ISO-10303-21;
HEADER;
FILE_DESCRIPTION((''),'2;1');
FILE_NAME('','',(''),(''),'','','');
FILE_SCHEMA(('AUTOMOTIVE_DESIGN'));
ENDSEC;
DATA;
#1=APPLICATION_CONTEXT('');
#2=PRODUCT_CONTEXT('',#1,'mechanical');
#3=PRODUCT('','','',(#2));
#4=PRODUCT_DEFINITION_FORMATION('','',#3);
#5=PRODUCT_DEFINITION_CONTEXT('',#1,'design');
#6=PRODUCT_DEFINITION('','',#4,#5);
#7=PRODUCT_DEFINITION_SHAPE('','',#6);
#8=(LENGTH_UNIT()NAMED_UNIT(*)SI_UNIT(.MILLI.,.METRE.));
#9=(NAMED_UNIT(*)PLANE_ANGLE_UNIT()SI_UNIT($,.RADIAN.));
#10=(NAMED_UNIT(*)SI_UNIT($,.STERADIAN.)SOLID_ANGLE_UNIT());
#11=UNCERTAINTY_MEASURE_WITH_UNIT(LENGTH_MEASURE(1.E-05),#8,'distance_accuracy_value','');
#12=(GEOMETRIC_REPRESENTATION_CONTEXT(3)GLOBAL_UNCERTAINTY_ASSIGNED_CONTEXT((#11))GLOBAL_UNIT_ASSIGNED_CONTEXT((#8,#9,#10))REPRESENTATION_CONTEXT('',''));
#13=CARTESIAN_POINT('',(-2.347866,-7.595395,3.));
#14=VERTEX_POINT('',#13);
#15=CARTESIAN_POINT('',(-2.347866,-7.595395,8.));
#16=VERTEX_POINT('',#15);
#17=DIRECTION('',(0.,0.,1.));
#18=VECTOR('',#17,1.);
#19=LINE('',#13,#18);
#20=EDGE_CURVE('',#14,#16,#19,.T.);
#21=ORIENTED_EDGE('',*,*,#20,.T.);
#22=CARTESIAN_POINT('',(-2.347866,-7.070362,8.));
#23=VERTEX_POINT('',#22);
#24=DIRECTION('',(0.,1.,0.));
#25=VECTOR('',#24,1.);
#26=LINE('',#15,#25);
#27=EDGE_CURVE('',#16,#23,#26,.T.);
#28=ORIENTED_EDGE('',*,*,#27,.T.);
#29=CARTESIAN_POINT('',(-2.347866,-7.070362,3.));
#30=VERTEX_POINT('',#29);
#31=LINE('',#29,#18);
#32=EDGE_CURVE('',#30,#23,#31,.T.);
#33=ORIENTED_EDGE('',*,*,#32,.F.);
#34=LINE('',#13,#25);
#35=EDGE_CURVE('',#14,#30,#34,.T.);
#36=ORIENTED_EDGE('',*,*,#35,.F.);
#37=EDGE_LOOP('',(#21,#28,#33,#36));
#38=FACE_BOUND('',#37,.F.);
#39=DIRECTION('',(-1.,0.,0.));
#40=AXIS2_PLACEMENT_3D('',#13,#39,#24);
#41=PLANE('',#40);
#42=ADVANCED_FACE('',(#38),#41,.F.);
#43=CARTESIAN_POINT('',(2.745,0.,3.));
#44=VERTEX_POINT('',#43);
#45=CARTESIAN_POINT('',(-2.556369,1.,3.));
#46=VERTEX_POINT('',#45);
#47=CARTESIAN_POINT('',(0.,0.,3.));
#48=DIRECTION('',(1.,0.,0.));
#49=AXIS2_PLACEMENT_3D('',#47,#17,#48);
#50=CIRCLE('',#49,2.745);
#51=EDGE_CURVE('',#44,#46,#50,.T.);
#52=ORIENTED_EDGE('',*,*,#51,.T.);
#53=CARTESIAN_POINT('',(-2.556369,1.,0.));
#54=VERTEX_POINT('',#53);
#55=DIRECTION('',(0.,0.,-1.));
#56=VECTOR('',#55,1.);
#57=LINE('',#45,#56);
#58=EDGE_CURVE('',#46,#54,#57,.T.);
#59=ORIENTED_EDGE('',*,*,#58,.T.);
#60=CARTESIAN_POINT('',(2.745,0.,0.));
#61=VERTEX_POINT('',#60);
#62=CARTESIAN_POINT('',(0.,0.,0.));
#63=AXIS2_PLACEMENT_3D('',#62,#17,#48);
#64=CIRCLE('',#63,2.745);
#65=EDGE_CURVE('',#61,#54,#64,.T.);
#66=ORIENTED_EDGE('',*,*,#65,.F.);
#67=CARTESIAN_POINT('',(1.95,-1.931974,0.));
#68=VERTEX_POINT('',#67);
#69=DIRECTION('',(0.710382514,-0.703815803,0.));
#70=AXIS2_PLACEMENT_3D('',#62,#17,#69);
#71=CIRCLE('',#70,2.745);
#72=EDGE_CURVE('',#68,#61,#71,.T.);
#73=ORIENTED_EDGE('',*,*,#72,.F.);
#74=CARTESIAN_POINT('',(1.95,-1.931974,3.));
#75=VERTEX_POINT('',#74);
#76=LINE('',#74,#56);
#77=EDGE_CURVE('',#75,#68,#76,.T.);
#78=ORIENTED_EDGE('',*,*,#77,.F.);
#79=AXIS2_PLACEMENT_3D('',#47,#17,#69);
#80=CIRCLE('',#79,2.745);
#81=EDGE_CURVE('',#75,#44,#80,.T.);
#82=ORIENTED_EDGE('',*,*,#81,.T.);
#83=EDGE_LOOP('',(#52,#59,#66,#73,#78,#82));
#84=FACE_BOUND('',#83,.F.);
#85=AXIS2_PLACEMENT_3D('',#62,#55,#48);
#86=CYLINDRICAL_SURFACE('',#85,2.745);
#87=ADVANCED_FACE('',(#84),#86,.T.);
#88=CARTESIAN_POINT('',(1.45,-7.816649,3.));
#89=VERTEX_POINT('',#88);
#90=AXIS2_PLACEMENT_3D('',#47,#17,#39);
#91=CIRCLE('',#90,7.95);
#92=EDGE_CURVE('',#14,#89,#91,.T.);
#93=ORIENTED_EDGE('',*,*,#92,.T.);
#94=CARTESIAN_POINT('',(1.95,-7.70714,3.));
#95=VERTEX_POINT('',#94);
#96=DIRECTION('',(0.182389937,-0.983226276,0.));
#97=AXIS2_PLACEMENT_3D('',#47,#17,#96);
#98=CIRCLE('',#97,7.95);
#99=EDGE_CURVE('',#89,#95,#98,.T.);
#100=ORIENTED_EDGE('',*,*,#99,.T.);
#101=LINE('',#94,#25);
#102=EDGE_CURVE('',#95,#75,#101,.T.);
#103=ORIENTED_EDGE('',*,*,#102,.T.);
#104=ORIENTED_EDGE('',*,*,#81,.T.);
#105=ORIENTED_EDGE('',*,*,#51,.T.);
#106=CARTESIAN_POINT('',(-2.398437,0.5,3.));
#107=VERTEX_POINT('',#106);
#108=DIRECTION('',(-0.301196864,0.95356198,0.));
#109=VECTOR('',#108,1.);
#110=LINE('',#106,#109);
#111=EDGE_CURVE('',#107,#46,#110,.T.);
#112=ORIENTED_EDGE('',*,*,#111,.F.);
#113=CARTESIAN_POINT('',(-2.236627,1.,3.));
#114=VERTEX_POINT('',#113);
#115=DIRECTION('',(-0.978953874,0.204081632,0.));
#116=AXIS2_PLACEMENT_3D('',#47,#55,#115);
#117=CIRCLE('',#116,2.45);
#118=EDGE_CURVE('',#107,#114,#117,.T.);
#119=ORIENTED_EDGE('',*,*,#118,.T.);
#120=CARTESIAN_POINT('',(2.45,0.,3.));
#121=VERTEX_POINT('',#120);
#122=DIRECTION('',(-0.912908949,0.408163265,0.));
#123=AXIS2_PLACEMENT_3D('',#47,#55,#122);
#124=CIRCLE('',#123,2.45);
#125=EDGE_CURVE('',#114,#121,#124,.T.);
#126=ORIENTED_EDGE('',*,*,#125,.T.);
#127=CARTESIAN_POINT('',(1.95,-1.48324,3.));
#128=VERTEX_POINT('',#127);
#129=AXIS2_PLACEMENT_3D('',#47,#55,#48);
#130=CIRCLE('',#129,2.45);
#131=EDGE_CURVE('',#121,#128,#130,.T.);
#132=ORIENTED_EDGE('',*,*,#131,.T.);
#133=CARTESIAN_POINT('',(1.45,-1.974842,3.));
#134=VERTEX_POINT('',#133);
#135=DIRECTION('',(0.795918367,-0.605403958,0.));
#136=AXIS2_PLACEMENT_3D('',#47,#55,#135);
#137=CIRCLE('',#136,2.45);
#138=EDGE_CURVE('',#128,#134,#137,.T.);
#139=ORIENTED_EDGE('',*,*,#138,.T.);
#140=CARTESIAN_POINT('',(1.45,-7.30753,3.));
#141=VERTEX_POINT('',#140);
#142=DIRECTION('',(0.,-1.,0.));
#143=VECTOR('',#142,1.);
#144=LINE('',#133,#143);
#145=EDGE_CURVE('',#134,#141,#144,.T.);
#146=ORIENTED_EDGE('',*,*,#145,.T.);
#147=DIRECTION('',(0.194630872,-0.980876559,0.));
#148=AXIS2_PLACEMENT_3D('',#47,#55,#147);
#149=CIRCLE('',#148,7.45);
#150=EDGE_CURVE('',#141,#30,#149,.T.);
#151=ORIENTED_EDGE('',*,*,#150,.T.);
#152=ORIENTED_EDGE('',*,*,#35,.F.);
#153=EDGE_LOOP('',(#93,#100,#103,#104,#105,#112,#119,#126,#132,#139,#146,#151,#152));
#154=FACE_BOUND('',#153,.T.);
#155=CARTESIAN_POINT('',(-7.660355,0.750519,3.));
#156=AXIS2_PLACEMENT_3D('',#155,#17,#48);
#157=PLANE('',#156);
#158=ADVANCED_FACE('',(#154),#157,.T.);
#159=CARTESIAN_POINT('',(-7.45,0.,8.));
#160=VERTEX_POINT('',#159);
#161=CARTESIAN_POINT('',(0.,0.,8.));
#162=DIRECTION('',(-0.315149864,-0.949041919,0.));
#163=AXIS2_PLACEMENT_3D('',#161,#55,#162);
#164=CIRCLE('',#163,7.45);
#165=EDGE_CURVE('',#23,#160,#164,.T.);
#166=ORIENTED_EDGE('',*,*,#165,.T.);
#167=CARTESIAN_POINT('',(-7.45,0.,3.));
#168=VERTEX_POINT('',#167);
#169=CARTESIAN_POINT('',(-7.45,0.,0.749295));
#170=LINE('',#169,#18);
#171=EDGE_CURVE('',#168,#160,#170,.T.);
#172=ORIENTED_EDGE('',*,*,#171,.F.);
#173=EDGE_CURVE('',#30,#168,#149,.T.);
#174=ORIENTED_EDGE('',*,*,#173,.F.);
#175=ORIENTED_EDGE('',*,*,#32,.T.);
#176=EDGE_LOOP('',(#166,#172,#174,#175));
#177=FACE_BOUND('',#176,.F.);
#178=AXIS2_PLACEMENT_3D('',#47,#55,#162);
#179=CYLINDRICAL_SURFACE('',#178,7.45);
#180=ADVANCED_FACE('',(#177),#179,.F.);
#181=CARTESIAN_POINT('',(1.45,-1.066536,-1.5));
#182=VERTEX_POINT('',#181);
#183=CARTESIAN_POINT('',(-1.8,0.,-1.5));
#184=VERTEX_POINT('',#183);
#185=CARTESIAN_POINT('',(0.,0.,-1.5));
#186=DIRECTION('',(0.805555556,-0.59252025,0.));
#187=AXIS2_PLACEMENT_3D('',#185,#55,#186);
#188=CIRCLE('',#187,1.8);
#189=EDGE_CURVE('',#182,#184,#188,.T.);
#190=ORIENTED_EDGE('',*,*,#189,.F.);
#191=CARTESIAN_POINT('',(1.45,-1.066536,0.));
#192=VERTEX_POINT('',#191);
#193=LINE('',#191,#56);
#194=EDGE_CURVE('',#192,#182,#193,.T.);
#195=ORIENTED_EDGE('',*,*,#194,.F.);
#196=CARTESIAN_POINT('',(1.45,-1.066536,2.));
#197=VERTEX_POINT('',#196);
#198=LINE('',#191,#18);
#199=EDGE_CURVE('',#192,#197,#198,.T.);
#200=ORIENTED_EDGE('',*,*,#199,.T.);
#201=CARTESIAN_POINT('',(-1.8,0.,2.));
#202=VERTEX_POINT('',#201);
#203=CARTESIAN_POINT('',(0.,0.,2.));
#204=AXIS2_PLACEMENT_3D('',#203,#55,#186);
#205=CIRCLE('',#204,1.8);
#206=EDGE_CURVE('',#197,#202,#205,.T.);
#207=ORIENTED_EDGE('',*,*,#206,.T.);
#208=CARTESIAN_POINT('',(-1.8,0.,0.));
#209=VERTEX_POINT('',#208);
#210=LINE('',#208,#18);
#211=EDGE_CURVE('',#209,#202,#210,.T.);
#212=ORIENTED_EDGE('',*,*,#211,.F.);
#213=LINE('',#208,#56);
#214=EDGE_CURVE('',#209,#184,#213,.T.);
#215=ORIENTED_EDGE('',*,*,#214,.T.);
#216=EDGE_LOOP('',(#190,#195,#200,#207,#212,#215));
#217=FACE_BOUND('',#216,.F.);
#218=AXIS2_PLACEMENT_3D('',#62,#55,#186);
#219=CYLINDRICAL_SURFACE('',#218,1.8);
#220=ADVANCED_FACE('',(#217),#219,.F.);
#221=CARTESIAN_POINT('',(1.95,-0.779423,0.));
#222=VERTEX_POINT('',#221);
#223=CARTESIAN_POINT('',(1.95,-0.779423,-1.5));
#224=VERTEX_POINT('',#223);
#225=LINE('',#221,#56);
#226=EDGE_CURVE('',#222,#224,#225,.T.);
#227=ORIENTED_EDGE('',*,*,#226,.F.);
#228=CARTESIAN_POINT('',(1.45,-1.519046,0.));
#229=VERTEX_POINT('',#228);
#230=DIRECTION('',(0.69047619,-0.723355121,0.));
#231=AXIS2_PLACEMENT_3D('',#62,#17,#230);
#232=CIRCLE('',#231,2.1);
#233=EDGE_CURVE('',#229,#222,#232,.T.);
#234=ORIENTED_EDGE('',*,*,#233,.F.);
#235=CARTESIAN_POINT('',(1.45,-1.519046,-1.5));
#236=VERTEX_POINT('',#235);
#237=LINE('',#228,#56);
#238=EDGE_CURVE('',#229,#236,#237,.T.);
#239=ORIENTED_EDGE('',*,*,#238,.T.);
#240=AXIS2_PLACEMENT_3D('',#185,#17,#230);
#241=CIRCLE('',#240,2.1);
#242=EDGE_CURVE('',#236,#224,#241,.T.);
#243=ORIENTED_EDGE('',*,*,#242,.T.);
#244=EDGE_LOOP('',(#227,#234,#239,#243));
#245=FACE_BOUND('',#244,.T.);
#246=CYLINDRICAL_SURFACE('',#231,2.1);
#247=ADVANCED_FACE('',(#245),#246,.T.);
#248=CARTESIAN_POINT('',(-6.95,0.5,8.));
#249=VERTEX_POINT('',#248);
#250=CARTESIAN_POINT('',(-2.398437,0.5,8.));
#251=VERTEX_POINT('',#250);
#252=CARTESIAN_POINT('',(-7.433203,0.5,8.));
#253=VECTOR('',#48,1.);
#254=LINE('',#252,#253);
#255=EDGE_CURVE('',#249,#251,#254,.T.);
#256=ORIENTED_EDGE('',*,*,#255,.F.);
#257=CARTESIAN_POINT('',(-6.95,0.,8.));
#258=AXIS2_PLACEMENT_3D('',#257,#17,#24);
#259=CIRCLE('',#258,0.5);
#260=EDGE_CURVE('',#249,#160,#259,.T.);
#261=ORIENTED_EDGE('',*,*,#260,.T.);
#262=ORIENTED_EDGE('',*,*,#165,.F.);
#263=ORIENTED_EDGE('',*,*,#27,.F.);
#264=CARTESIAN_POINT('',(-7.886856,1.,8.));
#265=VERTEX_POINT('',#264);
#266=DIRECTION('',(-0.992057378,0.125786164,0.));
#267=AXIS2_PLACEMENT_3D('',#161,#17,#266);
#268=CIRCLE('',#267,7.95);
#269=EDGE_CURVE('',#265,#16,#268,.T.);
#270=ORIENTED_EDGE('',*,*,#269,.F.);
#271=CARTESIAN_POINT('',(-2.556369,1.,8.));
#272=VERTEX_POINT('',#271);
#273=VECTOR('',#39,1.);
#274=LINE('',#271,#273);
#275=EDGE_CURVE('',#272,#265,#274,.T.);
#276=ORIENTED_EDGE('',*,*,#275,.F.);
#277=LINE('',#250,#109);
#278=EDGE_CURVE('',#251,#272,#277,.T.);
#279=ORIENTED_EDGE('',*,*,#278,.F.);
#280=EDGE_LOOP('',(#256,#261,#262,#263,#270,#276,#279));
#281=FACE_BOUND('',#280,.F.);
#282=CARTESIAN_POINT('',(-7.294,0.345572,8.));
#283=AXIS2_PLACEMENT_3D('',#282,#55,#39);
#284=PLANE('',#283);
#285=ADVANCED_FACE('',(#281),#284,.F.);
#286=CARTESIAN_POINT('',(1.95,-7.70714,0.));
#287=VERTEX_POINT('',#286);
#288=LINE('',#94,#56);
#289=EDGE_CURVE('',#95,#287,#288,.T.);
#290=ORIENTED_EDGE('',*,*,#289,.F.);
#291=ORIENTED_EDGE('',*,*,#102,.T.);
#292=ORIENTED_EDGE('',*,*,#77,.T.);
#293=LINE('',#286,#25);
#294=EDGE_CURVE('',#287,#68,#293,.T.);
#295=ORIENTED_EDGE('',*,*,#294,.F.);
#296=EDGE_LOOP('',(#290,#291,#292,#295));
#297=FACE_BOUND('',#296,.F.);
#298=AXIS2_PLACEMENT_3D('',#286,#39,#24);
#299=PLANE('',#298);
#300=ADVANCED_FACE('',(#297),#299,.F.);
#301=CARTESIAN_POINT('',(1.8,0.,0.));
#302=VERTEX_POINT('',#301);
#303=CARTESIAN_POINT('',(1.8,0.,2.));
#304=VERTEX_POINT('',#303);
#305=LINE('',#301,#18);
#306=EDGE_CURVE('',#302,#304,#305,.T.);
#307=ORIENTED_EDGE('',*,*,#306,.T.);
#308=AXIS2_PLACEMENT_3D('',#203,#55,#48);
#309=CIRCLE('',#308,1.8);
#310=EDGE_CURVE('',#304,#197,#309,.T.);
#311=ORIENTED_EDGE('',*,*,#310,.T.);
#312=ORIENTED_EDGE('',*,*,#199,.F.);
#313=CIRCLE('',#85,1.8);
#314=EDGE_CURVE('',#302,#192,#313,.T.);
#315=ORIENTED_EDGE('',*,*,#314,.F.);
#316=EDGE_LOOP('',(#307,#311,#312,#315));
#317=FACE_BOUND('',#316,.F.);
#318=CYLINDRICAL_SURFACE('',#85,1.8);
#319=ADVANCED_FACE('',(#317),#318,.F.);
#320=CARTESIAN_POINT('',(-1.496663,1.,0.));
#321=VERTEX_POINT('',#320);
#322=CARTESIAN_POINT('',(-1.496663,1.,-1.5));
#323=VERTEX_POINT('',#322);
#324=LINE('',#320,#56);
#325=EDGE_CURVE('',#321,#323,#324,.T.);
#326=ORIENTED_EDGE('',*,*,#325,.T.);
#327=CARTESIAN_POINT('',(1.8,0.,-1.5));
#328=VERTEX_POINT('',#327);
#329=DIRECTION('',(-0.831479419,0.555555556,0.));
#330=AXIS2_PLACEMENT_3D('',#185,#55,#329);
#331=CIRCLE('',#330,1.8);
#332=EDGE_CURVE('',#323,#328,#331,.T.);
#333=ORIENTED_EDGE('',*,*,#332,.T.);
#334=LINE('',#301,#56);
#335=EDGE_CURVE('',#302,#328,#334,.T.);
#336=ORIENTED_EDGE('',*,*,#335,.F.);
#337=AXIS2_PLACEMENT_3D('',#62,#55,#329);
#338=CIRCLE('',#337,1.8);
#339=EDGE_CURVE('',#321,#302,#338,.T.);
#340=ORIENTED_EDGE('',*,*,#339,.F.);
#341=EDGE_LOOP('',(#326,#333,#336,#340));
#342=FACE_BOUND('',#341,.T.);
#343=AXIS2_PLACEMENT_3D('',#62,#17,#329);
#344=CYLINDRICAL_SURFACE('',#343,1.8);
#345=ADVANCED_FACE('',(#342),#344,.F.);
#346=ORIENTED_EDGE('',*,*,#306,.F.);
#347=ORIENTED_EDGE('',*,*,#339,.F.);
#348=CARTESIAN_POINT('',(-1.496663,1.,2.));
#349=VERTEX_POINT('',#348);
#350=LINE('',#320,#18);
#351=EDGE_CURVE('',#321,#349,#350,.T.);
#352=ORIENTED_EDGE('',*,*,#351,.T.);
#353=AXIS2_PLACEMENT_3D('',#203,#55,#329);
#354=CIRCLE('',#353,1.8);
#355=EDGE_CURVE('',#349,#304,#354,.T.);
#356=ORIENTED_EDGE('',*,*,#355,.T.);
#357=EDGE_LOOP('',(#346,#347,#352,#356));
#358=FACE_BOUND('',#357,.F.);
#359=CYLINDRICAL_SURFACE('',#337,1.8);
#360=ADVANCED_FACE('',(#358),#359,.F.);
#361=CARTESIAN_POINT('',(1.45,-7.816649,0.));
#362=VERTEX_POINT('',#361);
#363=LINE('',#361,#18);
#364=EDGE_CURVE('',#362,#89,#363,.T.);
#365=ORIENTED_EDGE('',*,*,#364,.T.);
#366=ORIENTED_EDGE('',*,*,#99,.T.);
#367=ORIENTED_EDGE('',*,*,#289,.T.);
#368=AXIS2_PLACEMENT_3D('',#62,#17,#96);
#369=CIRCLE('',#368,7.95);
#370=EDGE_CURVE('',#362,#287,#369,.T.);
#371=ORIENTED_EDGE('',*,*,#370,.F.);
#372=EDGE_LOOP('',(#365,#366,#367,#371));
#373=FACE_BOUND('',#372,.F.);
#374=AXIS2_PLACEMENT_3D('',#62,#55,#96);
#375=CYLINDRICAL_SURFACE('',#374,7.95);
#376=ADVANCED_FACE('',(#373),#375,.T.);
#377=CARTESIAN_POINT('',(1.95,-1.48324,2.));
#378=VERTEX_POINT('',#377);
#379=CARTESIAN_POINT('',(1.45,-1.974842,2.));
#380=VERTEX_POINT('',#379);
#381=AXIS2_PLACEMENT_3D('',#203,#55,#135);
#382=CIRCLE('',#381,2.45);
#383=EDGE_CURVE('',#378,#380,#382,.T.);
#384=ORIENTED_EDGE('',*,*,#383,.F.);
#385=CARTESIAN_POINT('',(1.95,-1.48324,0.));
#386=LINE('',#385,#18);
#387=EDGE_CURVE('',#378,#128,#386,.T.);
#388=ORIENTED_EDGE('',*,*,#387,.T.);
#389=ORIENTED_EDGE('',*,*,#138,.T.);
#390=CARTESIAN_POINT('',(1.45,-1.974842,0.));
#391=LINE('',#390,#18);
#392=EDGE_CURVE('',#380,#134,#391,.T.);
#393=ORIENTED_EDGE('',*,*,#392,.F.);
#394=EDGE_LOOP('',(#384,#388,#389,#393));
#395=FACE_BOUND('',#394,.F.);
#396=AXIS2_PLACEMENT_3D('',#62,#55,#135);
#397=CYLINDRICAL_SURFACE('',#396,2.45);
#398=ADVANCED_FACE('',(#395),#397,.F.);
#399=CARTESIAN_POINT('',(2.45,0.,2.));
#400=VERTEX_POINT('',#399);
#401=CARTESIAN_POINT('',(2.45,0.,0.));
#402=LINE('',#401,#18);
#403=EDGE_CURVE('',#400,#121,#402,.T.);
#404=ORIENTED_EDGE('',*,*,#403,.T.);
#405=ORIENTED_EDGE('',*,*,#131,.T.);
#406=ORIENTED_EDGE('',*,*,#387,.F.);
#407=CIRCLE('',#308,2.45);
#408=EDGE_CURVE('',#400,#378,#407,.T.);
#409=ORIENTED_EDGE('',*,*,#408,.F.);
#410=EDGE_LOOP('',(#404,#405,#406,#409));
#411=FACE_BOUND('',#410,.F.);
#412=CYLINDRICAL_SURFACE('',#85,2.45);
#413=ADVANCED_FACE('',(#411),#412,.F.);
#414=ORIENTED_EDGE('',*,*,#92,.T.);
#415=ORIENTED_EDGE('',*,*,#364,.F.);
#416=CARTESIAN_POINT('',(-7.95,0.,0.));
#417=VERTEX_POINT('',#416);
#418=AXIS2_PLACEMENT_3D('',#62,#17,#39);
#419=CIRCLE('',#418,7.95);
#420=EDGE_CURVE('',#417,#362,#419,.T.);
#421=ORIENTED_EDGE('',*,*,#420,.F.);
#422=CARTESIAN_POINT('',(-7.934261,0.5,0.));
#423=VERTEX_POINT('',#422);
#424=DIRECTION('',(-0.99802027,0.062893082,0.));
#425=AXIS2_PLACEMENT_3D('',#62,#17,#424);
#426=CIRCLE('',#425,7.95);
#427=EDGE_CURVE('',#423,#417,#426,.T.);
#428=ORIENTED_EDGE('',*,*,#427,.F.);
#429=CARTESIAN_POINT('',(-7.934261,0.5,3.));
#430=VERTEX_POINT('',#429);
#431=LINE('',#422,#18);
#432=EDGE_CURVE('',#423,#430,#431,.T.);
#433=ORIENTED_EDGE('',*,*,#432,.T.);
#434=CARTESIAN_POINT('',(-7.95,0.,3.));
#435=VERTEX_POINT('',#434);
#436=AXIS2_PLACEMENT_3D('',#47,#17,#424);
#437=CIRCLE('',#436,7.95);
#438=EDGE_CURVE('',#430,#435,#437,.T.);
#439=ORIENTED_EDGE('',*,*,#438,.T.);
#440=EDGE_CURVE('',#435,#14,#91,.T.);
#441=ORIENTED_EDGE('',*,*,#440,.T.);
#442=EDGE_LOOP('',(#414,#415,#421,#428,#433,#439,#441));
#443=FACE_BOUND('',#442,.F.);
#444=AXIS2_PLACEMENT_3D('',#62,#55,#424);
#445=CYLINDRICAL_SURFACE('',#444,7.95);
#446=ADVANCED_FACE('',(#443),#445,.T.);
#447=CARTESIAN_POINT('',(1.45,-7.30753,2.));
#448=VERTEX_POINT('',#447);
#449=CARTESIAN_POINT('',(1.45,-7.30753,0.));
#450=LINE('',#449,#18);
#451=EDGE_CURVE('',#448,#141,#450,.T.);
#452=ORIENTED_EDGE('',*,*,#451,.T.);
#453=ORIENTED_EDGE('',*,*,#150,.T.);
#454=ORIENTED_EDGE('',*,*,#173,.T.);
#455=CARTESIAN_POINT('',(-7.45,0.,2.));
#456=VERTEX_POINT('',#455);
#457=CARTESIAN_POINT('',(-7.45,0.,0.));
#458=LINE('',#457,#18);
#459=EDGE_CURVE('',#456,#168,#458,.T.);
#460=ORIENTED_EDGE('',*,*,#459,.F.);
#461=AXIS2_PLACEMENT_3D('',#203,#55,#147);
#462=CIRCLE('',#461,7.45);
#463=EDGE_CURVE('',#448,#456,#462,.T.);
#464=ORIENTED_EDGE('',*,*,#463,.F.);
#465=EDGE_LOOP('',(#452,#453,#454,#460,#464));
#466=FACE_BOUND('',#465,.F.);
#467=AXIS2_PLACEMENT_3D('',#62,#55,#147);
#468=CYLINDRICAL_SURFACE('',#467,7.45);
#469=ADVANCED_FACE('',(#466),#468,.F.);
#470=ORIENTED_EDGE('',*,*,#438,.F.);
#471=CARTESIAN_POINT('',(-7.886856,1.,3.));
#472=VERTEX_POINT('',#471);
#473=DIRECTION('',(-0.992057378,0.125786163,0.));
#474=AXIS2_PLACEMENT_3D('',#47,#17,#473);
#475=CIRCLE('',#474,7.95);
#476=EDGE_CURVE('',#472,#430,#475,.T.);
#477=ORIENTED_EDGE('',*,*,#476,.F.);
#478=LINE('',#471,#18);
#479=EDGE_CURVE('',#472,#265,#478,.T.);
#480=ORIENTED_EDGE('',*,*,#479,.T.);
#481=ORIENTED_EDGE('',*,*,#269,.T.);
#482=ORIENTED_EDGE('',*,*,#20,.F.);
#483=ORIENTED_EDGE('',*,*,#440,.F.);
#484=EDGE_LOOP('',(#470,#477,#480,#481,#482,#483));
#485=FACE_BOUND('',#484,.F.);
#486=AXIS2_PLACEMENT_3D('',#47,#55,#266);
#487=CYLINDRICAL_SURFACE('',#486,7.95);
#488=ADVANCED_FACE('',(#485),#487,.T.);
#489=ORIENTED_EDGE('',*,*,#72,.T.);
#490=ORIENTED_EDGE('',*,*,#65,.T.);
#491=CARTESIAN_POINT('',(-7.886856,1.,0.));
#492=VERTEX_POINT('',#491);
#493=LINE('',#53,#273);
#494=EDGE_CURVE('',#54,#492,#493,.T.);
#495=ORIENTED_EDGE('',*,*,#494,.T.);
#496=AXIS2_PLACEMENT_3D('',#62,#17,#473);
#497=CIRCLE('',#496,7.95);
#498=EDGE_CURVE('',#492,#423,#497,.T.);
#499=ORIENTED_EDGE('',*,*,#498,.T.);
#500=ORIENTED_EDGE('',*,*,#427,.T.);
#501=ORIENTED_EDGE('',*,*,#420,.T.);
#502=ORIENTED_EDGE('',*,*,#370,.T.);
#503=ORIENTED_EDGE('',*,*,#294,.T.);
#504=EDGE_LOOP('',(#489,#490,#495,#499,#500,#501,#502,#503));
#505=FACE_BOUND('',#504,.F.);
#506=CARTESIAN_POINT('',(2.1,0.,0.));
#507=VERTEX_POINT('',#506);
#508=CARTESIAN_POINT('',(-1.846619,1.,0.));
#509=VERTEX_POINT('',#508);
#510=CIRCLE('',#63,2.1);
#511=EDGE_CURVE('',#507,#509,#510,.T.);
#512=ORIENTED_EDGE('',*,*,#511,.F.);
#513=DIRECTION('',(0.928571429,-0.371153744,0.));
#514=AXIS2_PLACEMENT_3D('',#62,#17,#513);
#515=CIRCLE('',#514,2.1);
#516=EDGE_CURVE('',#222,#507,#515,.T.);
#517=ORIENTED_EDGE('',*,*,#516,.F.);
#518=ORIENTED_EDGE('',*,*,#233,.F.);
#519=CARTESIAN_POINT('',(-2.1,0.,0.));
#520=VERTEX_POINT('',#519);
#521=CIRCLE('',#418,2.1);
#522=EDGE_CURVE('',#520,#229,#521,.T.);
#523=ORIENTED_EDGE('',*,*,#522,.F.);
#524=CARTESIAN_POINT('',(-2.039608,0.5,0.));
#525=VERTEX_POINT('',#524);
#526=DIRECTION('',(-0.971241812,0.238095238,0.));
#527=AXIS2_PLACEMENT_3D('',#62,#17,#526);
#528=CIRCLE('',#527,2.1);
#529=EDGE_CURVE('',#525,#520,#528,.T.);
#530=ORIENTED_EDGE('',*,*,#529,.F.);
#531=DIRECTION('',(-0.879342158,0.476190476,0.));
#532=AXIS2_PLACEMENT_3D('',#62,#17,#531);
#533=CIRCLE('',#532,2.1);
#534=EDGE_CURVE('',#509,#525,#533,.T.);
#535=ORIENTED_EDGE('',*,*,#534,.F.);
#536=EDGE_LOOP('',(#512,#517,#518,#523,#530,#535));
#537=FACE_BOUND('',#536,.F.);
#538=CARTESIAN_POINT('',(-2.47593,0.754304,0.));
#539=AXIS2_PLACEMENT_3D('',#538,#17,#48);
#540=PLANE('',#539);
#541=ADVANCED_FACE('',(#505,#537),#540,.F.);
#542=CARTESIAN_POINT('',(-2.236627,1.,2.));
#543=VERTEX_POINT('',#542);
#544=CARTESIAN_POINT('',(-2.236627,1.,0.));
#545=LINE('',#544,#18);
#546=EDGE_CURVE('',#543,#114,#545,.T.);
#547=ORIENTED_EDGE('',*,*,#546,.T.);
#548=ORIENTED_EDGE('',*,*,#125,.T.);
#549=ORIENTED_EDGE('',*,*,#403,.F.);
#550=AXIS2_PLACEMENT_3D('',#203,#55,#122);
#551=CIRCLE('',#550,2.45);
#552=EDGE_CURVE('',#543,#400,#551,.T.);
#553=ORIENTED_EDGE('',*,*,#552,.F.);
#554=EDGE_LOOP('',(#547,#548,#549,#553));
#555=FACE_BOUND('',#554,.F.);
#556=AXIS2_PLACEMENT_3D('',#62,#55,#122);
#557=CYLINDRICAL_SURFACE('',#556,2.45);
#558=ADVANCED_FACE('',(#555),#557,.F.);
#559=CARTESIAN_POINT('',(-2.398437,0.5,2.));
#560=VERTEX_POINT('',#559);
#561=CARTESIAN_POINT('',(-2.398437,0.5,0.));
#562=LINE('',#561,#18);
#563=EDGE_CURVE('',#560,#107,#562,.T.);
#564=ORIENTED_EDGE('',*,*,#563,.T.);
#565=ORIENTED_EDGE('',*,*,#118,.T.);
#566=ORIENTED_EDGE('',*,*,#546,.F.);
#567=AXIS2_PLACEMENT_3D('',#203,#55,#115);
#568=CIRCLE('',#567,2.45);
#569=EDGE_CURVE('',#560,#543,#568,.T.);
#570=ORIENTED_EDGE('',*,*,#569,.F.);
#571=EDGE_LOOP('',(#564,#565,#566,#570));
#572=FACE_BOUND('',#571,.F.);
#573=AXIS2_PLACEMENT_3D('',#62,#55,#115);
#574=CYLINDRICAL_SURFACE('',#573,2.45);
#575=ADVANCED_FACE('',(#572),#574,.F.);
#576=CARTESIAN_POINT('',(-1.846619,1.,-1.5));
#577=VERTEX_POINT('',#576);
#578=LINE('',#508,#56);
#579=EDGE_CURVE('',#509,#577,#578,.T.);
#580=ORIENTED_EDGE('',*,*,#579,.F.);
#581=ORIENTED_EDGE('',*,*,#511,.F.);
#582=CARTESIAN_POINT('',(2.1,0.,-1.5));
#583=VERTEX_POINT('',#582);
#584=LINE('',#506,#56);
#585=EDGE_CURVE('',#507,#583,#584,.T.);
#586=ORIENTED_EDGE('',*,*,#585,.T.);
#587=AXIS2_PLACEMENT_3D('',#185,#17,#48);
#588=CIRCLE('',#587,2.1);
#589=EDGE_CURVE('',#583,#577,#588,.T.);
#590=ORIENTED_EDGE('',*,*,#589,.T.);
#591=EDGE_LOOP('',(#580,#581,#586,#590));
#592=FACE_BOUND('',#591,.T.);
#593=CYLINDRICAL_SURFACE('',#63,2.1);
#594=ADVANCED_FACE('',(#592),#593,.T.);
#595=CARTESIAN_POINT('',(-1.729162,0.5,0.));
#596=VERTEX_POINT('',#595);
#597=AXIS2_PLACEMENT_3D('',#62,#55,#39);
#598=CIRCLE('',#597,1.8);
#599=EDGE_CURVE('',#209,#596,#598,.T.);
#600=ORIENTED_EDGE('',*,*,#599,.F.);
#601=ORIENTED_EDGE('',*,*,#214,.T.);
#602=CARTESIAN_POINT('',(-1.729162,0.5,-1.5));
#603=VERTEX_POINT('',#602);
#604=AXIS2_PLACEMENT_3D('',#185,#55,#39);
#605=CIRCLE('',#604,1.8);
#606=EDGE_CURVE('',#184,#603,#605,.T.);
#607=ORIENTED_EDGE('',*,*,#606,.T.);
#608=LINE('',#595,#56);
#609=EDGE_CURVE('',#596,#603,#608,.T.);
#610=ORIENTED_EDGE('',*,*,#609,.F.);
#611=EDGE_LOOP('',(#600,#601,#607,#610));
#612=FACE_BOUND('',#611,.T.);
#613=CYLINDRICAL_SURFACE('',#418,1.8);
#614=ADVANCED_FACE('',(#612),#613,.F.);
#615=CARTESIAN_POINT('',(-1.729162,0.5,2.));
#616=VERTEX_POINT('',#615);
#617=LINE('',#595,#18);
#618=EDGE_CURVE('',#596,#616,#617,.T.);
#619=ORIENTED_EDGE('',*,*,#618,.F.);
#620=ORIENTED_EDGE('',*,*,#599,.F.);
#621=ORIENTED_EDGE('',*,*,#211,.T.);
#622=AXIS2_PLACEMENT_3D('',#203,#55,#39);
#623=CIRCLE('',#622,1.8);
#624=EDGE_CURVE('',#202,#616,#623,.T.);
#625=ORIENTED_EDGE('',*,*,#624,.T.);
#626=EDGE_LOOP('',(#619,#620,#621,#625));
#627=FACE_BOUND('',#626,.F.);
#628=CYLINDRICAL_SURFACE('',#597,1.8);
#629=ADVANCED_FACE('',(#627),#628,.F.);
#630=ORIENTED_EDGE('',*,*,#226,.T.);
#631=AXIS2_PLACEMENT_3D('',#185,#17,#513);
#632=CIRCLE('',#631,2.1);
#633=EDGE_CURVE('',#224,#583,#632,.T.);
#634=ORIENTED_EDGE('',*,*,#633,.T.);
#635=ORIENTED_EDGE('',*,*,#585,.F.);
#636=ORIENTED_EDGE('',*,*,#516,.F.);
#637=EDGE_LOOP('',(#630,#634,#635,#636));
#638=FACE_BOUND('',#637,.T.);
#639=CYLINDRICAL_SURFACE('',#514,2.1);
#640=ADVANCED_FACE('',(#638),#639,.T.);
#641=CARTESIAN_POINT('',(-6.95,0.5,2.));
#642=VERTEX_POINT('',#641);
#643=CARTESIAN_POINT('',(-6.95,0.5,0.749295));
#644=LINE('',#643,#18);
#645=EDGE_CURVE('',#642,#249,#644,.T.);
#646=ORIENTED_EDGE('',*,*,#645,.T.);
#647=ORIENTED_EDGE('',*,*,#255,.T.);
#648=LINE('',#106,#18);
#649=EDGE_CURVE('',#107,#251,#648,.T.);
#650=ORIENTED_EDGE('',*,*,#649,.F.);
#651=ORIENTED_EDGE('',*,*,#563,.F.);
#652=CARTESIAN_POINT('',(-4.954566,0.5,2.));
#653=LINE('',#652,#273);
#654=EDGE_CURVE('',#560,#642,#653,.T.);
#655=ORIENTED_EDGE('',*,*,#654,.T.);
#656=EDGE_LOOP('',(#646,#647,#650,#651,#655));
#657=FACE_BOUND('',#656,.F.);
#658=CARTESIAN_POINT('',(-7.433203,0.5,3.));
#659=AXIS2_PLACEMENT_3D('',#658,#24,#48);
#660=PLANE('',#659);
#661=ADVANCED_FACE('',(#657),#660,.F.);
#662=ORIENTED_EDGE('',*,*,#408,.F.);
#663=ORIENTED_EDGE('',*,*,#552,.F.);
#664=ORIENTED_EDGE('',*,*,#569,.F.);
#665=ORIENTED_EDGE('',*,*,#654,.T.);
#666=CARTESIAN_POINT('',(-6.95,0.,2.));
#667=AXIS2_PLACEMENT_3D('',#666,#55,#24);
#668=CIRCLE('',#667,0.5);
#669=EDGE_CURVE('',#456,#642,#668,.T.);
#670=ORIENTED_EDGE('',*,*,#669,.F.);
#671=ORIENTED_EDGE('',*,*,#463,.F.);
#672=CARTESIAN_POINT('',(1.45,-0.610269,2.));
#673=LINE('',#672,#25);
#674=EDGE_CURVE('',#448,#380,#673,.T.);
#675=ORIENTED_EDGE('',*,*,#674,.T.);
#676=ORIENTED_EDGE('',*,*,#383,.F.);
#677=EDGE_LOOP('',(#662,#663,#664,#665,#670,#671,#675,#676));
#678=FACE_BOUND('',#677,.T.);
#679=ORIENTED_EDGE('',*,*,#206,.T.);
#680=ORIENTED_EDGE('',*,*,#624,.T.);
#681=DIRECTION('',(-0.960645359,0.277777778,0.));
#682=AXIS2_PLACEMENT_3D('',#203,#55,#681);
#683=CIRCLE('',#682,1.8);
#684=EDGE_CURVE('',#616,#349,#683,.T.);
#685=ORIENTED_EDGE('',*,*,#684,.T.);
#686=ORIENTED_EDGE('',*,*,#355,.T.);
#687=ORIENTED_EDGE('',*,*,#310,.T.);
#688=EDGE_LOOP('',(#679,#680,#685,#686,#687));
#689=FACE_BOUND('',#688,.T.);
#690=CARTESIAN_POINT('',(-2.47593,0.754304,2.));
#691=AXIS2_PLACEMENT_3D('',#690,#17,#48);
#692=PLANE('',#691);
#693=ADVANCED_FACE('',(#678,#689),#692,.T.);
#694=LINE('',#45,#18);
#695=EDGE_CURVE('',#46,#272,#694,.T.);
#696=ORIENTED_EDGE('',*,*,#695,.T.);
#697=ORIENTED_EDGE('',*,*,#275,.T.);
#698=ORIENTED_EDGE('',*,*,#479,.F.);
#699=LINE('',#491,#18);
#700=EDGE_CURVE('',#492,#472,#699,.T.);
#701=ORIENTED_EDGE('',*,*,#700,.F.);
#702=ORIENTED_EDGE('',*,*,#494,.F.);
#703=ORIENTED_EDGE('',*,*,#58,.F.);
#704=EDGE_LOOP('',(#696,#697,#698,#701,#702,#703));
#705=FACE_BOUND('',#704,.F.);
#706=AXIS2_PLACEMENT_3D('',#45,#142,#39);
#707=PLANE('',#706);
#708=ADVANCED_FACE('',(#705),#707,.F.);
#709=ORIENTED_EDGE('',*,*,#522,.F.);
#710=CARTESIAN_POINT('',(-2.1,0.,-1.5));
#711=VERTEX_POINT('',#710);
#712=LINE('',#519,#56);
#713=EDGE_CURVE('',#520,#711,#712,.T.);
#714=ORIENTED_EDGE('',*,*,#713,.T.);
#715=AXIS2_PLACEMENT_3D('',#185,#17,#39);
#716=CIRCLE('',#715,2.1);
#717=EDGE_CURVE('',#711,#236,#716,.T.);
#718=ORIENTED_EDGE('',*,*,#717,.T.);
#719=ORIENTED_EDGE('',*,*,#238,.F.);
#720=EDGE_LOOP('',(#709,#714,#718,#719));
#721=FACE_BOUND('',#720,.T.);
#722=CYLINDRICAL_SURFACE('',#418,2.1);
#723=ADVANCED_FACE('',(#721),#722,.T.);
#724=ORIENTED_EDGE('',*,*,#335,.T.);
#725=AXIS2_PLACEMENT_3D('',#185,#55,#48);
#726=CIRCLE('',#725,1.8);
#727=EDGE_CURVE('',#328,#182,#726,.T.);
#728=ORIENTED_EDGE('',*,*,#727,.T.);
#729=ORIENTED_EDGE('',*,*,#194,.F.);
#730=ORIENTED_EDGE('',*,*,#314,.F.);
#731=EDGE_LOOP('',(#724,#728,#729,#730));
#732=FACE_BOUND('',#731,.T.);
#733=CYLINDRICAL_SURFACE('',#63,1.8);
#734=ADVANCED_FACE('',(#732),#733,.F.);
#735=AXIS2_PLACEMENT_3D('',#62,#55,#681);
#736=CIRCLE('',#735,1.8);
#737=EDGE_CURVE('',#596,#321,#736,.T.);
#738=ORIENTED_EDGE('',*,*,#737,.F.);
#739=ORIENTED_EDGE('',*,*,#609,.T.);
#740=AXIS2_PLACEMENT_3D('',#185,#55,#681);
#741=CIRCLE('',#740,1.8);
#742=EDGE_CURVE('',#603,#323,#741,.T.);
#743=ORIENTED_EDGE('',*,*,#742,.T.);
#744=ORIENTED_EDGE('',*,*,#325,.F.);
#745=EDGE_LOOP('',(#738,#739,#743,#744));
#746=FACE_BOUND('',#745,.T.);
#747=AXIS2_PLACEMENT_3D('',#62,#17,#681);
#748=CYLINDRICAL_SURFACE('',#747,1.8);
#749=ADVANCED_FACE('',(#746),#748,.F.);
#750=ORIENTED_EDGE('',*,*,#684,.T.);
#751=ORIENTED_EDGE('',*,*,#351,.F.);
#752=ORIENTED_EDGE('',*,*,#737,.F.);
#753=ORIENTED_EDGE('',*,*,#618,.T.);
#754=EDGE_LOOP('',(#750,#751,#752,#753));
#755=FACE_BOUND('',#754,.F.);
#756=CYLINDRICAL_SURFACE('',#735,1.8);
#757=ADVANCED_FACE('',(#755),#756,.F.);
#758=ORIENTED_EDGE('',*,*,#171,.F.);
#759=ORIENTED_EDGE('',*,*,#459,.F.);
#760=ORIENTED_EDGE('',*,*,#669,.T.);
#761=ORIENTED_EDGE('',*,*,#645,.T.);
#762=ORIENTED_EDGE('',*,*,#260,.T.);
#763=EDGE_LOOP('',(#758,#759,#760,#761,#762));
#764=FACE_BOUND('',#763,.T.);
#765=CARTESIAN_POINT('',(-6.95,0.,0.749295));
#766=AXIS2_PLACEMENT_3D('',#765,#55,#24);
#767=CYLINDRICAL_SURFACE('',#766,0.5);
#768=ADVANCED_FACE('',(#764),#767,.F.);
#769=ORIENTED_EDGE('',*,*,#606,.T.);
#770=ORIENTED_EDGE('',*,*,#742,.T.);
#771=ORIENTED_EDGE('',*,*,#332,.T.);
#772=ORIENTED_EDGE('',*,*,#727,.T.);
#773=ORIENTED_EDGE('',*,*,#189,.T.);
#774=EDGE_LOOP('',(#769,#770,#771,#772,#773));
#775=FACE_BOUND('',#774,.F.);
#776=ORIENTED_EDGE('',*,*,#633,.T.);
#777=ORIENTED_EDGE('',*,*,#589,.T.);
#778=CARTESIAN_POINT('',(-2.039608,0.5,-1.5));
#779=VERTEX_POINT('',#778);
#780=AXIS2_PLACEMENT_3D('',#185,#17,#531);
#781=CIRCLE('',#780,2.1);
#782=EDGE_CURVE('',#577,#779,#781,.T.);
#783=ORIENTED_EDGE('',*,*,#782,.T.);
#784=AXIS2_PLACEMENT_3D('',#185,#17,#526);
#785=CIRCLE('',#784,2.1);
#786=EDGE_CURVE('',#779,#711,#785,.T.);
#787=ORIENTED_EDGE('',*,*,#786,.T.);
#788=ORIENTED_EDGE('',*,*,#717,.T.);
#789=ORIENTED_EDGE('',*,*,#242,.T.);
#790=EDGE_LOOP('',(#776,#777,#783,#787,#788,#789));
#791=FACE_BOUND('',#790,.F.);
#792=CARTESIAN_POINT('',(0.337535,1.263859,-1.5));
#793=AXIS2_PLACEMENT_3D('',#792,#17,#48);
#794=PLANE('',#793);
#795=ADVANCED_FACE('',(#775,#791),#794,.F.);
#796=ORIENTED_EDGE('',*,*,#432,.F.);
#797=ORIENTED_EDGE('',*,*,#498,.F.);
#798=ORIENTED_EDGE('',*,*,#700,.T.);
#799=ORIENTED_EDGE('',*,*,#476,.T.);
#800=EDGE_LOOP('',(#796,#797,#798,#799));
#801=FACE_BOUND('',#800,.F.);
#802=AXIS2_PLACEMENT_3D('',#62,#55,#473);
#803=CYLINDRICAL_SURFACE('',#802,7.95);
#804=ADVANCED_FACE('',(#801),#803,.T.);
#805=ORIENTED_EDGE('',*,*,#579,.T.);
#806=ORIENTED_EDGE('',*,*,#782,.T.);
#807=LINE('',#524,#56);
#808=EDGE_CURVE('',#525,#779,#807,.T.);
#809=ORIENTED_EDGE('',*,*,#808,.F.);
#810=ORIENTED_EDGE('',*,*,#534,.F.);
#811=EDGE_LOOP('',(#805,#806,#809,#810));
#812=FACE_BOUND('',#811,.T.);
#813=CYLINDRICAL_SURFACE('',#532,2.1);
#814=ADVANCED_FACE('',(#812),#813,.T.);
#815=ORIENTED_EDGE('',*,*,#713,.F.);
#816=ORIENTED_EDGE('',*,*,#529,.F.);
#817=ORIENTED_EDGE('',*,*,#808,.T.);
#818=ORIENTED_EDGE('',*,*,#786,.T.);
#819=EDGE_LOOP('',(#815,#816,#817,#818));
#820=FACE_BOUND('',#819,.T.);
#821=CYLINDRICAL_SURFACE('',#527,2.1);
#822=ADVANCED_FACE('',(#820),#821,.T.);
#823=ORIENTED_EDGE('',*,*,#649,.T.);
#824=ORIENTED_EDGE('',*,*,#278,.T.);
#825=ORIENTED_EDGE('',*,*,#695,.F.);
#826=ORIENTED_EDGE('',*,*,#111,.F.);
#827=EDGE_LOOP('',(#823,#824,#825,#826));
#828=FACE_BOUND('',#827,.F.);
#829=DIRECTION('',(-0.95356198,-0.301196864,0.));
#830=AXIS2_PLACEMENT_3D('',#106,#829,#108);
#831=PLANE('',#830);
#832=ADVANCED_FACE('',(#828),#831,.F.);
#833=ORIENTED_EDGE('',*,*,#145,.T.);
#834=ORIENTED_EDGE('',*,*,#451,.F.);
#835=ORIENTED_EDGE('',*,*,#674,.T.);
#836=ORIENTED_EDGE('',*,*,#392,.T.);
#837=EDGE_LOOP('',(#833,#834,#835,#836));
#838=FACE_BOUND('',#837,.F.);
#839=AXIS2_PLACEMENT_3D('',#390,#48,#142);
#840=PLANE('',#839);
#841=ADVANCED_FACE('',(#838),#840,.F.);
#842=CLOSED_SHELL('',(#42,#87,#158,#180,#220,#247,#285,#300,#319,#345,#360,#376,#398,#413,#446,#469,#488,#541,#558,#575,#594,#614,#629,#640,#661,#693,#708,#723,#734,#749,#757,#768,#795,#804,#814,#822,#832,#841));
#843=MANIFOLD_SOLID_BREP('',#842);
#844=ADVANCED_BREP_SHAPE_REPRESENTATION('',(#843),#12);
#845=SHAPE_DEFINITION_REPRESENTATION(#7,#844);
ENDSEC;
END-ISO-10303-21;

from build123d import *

# Parameters (mm, degrees)
F1_DEPTH    = 2
F2_DEPTH    = 3
F3_DEPTH    = 1.5
F5_DEPTH    = 5
F6_T1_DEPTH = 7.2507051877


# Not quite as in the source:
# - a fillet or chamfer that OpenCascade refuses, or shapes differently, is made with other operations: its cross-section is extruded or revolved along the edge and cut away or added
# - a feature names something its author has since deleted; it is built from what else it names


with BuildPart() as f1:
    # F0 (on Top) → F1 (new body)
    with BuildSketch(Plane.XY):
        with BuildLine():
            ThreePointArc((-2.398436991, 0.5), (-2.3309771289, 0.7543511281), (-2.2366269246, 1))
            Line((-2.2366269246, 1), (-2.556369496, 1))
            ThreePointArc((-2.556369496, 1), (-2.6395896521, 0.7533866658), (-2.6990785465, 0.5))
            Line((-2.6990785465, 0.5), (-2.398436991, 0.5))
        make_face()
        with BuildLine():
            ThreePointArc((-2.2366269246, 1), (0.5112553348, 2.3960630173), (2.45, 0))
            ThreePointArc((2.45, 0), (2.3216373532, -0.7826237921), (1.95, -1.4832396974))
            Line((1.95, -1.4832396974), (1.95, -1.9319743787))
            ThreePointArc((1.95, -1.9319743787), (2.5384813373, -1.0445752725), (2.745, 0))
            ThreePointArc((2.745, 0), (0.5088176164, 2.6974301906), (-2.556369496, 1))
            Line((-2.556369496, 1), (-2.2366269246, 1))
        make_face()
        with BuildLine():
            ThreePointArc((-2.6990785465, 0.5), (-2.6395896521, 0.7533866658), (-2.556369496, 1))
            Line((-2.556369496, 1), (-7.3825808495, 1))
            ThreePointArc((-7.3825808495, 1), (-7.4121089685, 0.7504269711), (-7.43320254, 0.5))
            Line((-7.43320254, 0.5), (-2.6990785465, 0.5))
        make_face()
        with BuildLine():
            ThreePointArc((-2.745, 0), (-2.7334955286, 0.2510521758), (-2.6990785465, 0.5))
            Line((-2.6990785465, 0.5), (-7.43320254, 0.5))
            ThreePointArc((-7.43320254, 0.5), (-7.4457994508, 0.2501410375), (-7.45, 0))
            Line((-7.45, 0), (-2.745, 0))
        make_face()
        with BuildLine():
            Line((1.45, -7.3075303626), (1.45, -2.3307777672))
            ThreePointArc((1.45, -2.3307777672), (-1.3331869711, -2.399507762), (-2.745, 0))
            Line((-2.745, 0), (-7.45, 0))
            ThreePointArc((-7.45, 0), (-4.7275786614, -5.7578207683), (1.45, -7.3075303626))
        make_face()
        with BuildLine():
            Line((1.45, -2.3307777672), (1.45, -1.9748417658))
            ThreePointArc((1.45, -1.9748417658), (-1.1067971811, -2.1857492994), (-2.45, 0))
            Line((-2.45, 0), (-2.745, 0))
            ThreePointArc((-2.745, 0), (-1.3331869711, -2.399507762), (1.45, -2.3307777672))
        make_face()
        with BuildLine():
            Line((1.95, -1.9319743787), (1.95, -1.4832396974))
            ThreePointArc((1.95, -1.4832396974), (1.7176781271, -1.7470208504), (1.45, -1.9748417658))
            Line((1.45, -1.9748417658), (1.45, -2.3307777672))
            ThreePointArc((1.45, -2.3307777672), (1.7116544732, -2.1459878761), (1.95, -1.9319743787))
        make_face()
        with BuildLine():
            ThreePointArc((-2.745, 0), (-2.7334955286, 0.2510521758), (-2.6990785465, 0.5))
            Line((-2.6990785465, 0.5), (-7.43320254, 0.5))
            ThreePointArc((-7.43320254, 0.5), (-7.4457994508, 0.2501410375), (-7.45, 0))
            Line((-7.45, 0), (-2.745, 0))
        make_face()
        with BuildLine():
            Line((1.45, -7.3075303626), (1.45, -2.3307777672))
            ThreePointArc((1.45, -2.3307777672), (-1.3331869711, -2.399507762), (-2.745, 0))
            Line((-2.745, 0), (-7.45, 0))
            ThreePointArc((-7.45, 0), (-4.7275786614, -5.7578207683), (1.45, -7.3075303626))
        make_face()
        with BuildLine():
            Line((1.95, -7.1902712049), (1.95, -1.9319743787))
            ThreePointArc((1.95, -1.9319743787), (1.7116544732, -2.1459878761), (1.45, -2.3307777672))
            Line((1.45, -2.3307777672), (1.45, -7.3075303626))
            ThreePointArc((1.45, -7.3075303626), (1.7010107076, -7.253210501), (1.95, -7.1902712049))
        make_face()
        with BuildLine():
            ThreePointArc((-7.43320254, 0.5), (-7.4121089685, 0.7504269711), (-7.3825808495, 1))
            Line((-7.3825808495, 1), (-7.8868561544, 1))
            ThreePointArc((-7.8868561544, 1), (-7.9145080827, 0.7503744455), (-7.9342611502, 0.5))
            Line((-7.9342611502, 0.5), (-7.43320254, 0.5))
        make_face()
        with BuildLine():
            Line((1.95, -7.7071395472), (1.95, -7.1902712049))
            ThreePointArc((1.95, -7.1902712049), (1.7010107076, -7.253210501), (1.45, -7.3075303626))
            Line((1.45, -7.3075303626), (1.45, -7.8166488983))
            ThreePointArc((1.45, -7.8166488983), (1.700881558, -7.7659192582), (1.95, -7.7071395472))
        make_face()
        with BuildLine():
            ThreePointArc((-2.745, 0), (-2.7334955286, 0.2510521758), (-2.6990785465, 0.5))
            Line((-2.6990785465, 0.5), (-7.43320254, 0.5))
            ThreePointArc((-7.43320254, 0.5), (-7.4457994508, 0.2501410375), (-7.45, 0))
            Line((-7.45, 0), (-2.745, 0))
        make_face()
        with BuildLine():
            Line((1.45, -7.3075303626), (1.45, -2.3307777672))
            ThreePointArc((1.45, -2.3307777672), (-1.3331869711, -2.399507762), (-2.745, 0))
            Line((-2.745, 0), (-7.45, 0))
            ThreePointArc((-7.45, 0), (-4.7275786614, -5.7578207683), (1.45, -7.3075303626))
        make_face()
        with BuildLine():
            Line((1.95, -7.1902712049), (1.95, -1.9319743787))
            ThreePointArc((1.95, -1.9319743787), (1.7116544732, -2.1459878761), (1.45, -2.3307777672))
            Line((1.45, -2.3307777672), (1.45, -7.3075303626))
            ThreePointArc((1.45, -7.3075303626), (1.7010107076, -7.253210501), (1.95, -7.1902712049))
        make_face()
        with BuildLine():
            ThreePointArc((-7.43320254, 0.5), (-7.4121089685, 0.7504269711), (-7.3825808495, 1))
            Line((-7.3825808495, 1), (-7.8868561544, 1))
            ThreePointArc((-7.8868561544, 1), (-7.9145080827, 0.7503744455), (-7.9342611502, 0.5))
            Line((-7.9342611502, 0.5), (-7.43320254, 0.5))
        make_face()
        with BuildLine():
            Line((1.45, -7.8166488983), (1.45, -7.3075303626))
            ThreePointArc((1.45, -7.3075303626), (-4.7275786614, -5.7578207683), (-7.45, 0))
            Line((-7.45, 0), (-7.95, 0))
            ThreePointArc((-7.95, 0), (-5.0830601019, -6.1126917148), (1.45, -7.8166488983))
        make_face()
        with BuildLine():
            Line((1.95, -7.7071395472), (1.95, -7.1902712049))
            ThreePointArc((1.95, -7.1902712049), (1.7010107076, -7.253210501), (1.45, -7.3075303626))
            Line((1.45, -7.3075303626), (1.45, -7.8166488983))
            ThreePointArc((1.45, -7.8166488983), (1.700881558, -7.7659192582), (1.95, -7.7071395472))
        make_face()
        with BuildLine():
            ThreePointArc((-7.45, 0), (-7.4457994508, 0.2501410375), (-7.43320254, 0.5))
            Line((-7.43320254, 0.5), (-7.9342611502, 0.5))
            ThreePointArc((-7.9342611502, 0.5), (-7.9460643134, 0.250123825), (-7.95, 0))
            Line((-7.95, 0), (-7.45, 0))
        make_face()
        with BuildLine():
            ThreePointArc((-2.45, 0), (-2.4370751556, 0.2513258562), (-2.398436991, 0.5))
            Line((-2.398436991, 0.5), (-2.6990785465, 0.5))
            ThreePointArc((-2.6990785465, 0.5), (-2.7334955286, 0.2510521758), (-2.745, 0))
            Line((-2.745, 0), (-2.45, 0))
        make_face()
        with BuildLine():
            ThreePointArc((-2.45, 0), (-1.1067971811, -2.1857492994), (1.45, -1.9748417658))
            Line((1.45, -1.9748417658), (1.45, -1.5190457531))
            ThreePointArc((1.45, -1.5190457531), (-0.8261355821, -1.9306734576), (-2.1, 0))
            Line((-2.1, 0), (-2.45, 0))
        make_face()
        with BuildLine():
            ThreePointArc((-2.1, 0), (-0.8261355821, -1.9306734576), (1.45, -1.5190457531))
            Line((1.45, -1.5190457531), (1.45, -1.0665364504))
            ThreePointArc((1.45, -1.0665364504), (-0.561248608, -1.7102631376), (-1.8, 0))
            Line((-1.8, 0), (-2.1, 0))
        make_face()
        with BuildLine():
            Line((-2.0396078054, 0.5), (-2.398436991, 0.5))
            ThreePointArc((-2.398436991, 0.5), (-2.4370751556, 0.2513258562), (-2.45, 0))
            Line((-2.45, 0), (-2.1, 0))
            ThreePointArc((-2.1, 0), (-2.0848472835, 0.2518170056), (-2.0396078054, 0.5))
        make_face()
        with BuildLine():
            Line((-1.8466185313, 1), (-2.2366269246, 1))
            ThreePointArc((-2.2366269246, 1), (-2.3309771289, 0.7543511281), (-2.398436991, 0.5))
            Line((-2.398436991, 0.5), (-2.0396078054, 0.5))
            ThreePointArc((-2.0396078054, 0.5), (-1.9591295988, 0.7561819986), (-1.8466185313, 1))
        make_face()
        with BuildLine():
            Line((2.1, 0), (2.45, 0))
            ThreePointArc((2.45, 0), (0.5112553348, 2.3960630173), (-2.2366269246, 1))
            Line((-2.2366269246, 1), (-1.8466185313, 1))
            ThreePointArc((-1.8466185313, 1), (0.5158008745, 2.0356692899), (2.1, 0))
        make_face()
        with BuildLine():
            Line((-1.7291616466, 0.5), (-2.0396078054, 0.5))
            ThreePointArc((-2.0396078054, 0.5), (-2.0848472835, 0.2518170056), (-2.1, 0))
            Line((-2.1, 0), (-1.8, 0))
            ThreePointArc((-1.8, 0), (-1.7822024245, 0.2524965704), (-1.7291616466, 0.5))
        make_face()
        with BuildLine():
            Line((-1.4966629547, 1), (-1.8466185313, 1))
            ThreePointArc((-1.8466185313, 1), (-1.9591295988, 0.7561819986), (-2.0396078054, 0.5))
            Line((-2.0396078054, 0.5), (-1.7291616466, 0.5))
            ThreePointArc((-1.7291616466, 0.5), (-1.6321721997, 0.7589558027), (-1.4966629547, 1))
        make_face()
        with BuildLine():
            Line((1.95, 0), (2.1, 0))
            ThreePointArc((2.1, 0), (0.5158008745, 2.0356692899), (-1.8466185313, 1))
            Line((-1.8466185313, 1), (-1.4966629547, 1))
            ThreePointArc((-1.4966629547, 1), (0.522497216, 1.722497216), (1.8, 0))
            Line((1.8, 0), (1.95, 0))
        make_face()
        with BuildLine():
            ThreePointArc((1.45, -1.5190457531), (1.739758749, -1.176112025), (1.95, -0.7794228634))
            Line((1.95, -0.7794228634), (1.95, 0))
            Line((1.95, 0), (1.8, 0))
            ThreePointArc((1.8, 0), (1.7102631376, -0.561248608), (1.45, -1.0665364504))
            Line((1.45, -1.0665364504), (1.45, -1.5190457531))
        make_face()
        with BuildLine():
            ThreePointArc((1.45, -1.9748417658), (1.7176781271, -1.7470208504), (1.95, -1.4832396974))
            Line((1.95, -1.4832396974), (1.95, -0.7794228634))
            ThreePointArc((1.95, -0.7794228634), (1.739758749, -1.176112025), (1.45, -1.5190457531))
            Line((1.45, -1.5190457531), (1.45, -1.9748417658))
        make_face()
        with BuildLine():
            ThreePointArc((1.95, -0.7794228634), (2.0621590627, -0.3968626967), (2.1, 0))
            Line((2.1, 0), (1.95, 0))
            Line((1.95, 0), (1.95, -0.7794228634))
        make_face()
        with BuildLine():
            ThreePointArc((1.95, -1.4832396974), (2.3216373532, -0.7826237921), (2.45, 0))
            Line((2.45, 0), (2.1, 0))
            ThreePointArc((2.1, 0), (2.0621590627, -0.3968626967), (1.95, -0.7794228634))
            Line((1.95, -0.7794228634), (1.95, -1.4832396974))
        make_face()
    extrude(amount=F1_DEPTH)

    # F0 (on Top) → F2 (join)
    with BuildSketch(Plane.XY):
        with BuildLine():
            ThreePointArc((-7.43320254, 0.5), (-7.4121089685, 0.7504269711), (-7.3825808495, 1))
            Line((-7.3825808495, 1), (-7.8868561544, 1))
            ThreePointArc((-7.8868561544, 1), (-7.9145080827, 0.7503744455), (-7.9342611502, 0.5))
            Line((-7.9342611502, 0.5), (-7.43320254, 0.5))
        make_face()
        with BuildLine():
            ThreePointArc((-2.6990785465, 0.5), (-2.6395896521, 0.7533866658), (-2.556369496, 1))
            Line((-2.556369496, 1), (-7.3825808495, 1))
            ThreePointArc((-7.3825808495, 1), (-7.4121089685, 0.7504269711), (-7.43320254, 0.5))
            Line((-7.43320254, 0.5), (-2.6990785465, 0.5))
        make_face()
        with BuildLine():
            ThreePointArc((-2.398436991, 0.5), (-2.3309771289, 0.7543511281), (-2.2366269246, 1))
            Line((-2.2366269246, 1), (-2.556369496, 1))
            ThreePointArc((-2.556369496, 1), (-2.6395896521, 0.7533866658), (-2.6990785465, 0.5))
            Line((-2.6990785465, 0.5), (-2.398436991, 0.5))
        make_face()
        with BuildLine():
            ThreePointArc((-2.2366269246, 1), (0.5112553348, 2.3960630173), (2.45, 0))
            ThreePointArc((2.45, 0), (2.3216373532, -0.7826237921), (1.95, -1.4832396974))
            Line((1.95, -1.4832396974), (1.95, -1.9319743787))
            ThreePointArc((1.95, -1.9319743787), (2.5384813373, -1.0445752725), (2.745, 0))
            ThreePointArc((2.745, 0), (0.5088176164, 2.6974301906), (-2.556369496, 1))
            Line((-2.556369496, 1), (-2.2366269246, 1))
        make_face()
        with BuildLine():
            Line((1.95, -1.9319743787), (1.95, -1.4832396974))
            ThreePointArc((1.95, -1.4832396974), (1.7176781271, -1.7470208504), (1.45, -1.9748417658))
            Line((1.45, -1.9748417658), (1.45, -2.3307777672))
            ThreePointArc((1.45, -2.3307777672), (1.7116544732, -2.1459878761), (1.95, -1.9319743787))
        make_face()
        with BuildLine():
            Line((1.95, -7.1902712049), (1.95, -1.9319743787))
            ThreePointArc((1.95, -1.9319743787), (1.7116544732, -2.1459878761), (1.45, -2.3307777672))
            Line((1.45, -2.3307777672), (1.45, -7.3075303626))
            ThreePointArc((1.45, -7.3075303626), (1.7010107076, -7.253210501), (1.95, -7.1902712049))
        make_face()
        with BuildLine():
            Line((1.95, -7.7071395472), (1.95, -7.1902712049))
            ThreePointArc((1.95, -7.1902712049), (1.7010107076, -7.253210501), (1.45, -7.3075303626))
            Line((1.45, -7.3075303626), (1.45, -7.8166488983))
            ThreePointArc((1.45, -7.8166488983), (1.700881558, -7.7659192582), (1.95, -7.7071395472))
        make_face()
        with BuildLine():
            Line((1.45, -7.8166488983), (1.45, -7.3075303626))
            ThreePointArc((1.45, -7.3075303626), (-4.7275786614, -5.7578207683), (-7.45, 0))
            Line((-7.45, 0), (-7.95, 0))
            ThreePointArc((-7.95, 0), (-5.0830601019, -6.1126917148), (1.45, -7.8166488983))
        make_face()
        with BuildLine():
            ThreePointArc((-7.45, 0), (-7.4457994508, 0.2501410375), (-7.43320254, 0.5))
            Line((-7.43320254, 0.5), (-7.9342611502, 0.5))
            ThreePointArc((-7.9342611502, 0.5), (-7.9460643134, 0.250123825), (-7.95, 0))
            Line((-7.95, 0), (-7.45, 0))
        make_face()
    extrude(amount=F2_DEPTH)

    # F0 (on Top) → F3 (join)
    with BuildSketch(Plane.XY):
        with BuildLine():
            Line((1.95, 0), (2.1, 0))
            ThreePointArc((2.1, 0), (0.5158008745, 2.0356692899), (-1.8466185313, 1))
            Line((-1.8466185313, 1), (-1.4966629547, 1))
            ThreePointArc((-1.4966629547, 1), (0.522497216, 1.722497216), (1.8, 0))
            Line((1.8, 0), (1.95, 0))
        make_face()
        with BuildLine():
            Line((-1.4966629547, 1), (-1.8466185313, 1))
            ThreePointArc((-1.8466185313, 1), (-1.9591295988, 0.7561819986), (-2.0396078054, 0.5))
            Line((-2.0396078054, 0.5), (-1.7291616466, 0.5))
            ThreePointArc((-1.7291616466, 0.5), (-1.6321721997, 0.7589558027), (-1.4966629547, 1))
        make_face()
        with BuildLine():
            Line((-1.7291616466, 0.5), (-2.0396078054, 0.5))
            ThreePointArc((-2.0396078054, 0.5), (-2.0848472835, 0.2518170056), (-2.1, 0))
            Line((-2.1, 0), (-1.8, 0))
            ThreePointArc((-1.8, 0), (-1.7822024245, 0.2524965704), (-1.7291616466, 0.5))
        make_face()
        with BuildLine():
            ThreePointArc((-2.1, 0), (-0.8261355821, -1.9306734576), (1.45, -1.5190457531))
            Line((1.45, -1.5190457531), (1.45, -1.0665364504))
            ThreePointArc((1.45, -1.0665364504), (-0.561248608, -1.7102631376), (-1.8, 0))
            Line((-1.8, 0), (-2.1, 0))
        make_face()
        with BuildLine():
            ThreePointArc((1.45, -1.5190457531), (1.739758749, -1.176112025), (1.95, -0.7794228634))
            Line((1.95, -0.7794228634), (1.95, 0))
            Line((1.95, 0), (1.8, 0))
            ThreePointArc((1.8, 0), (1.7102631376, -0.561248608), (1.45, -1.0665364504))
            Line((1.45, -1.0665364504), (1.45, -1.5190457531))
        make_face()
        with BuildLine():
            ThreePointArc((1.95, -0.7794228634), (2.0621590627, -0.3968626967), (2.1, 0))
            Line((2.1, 0), (1.95, 0))
            Line((1.95, 0), (1.95, -0.7794228634))
        make_face()
    extrude(amount=-F3_DEPTH)

    # F4 (on face) → F5 (join)
    with BuildSketch(Plane.XY.offset(3)):
        with BuildLine():
            Line((-2.398436991, 0.5), (-2.556369496, 1))
            Line((-2.556369496, 1), (-7.8868561544, 1))
            ThreePointArc((-7.8868561544, 1), (-6.6826334673, -4.3063801437), (-2.3478664886, -7.5953948516))
            Line((-2.3478664886, -7.5953948516), (-2.3478664886, -7.0703622928))
            ThreePointArc((-2.3478664886, -7.0703622928), (-6.1842480664, -4.154223857), (-7.43320254, 0.5))
            Line((-7.43320254, 0.5), (-2.398436991, 0.5))
        make_face()
    extrude(amount=F5_DEPTH)

    # F6: fillet of radius 0.5 on 1 edges, made by hand

    # F6_s2 → F6_t1 (join)
    with BuildSketch(Plane.XY.offset(0.7492948123)):
        with BuildLine():
            ThreePointArc((-6.95, 0.5), (-7.3035533906, 0.3535533906), (-7.45, 0))
            ThreePointArc((-7.45, 0), (-7.4457994508, 0.2501410375), (-7.43320254, 0.5))
            Line((-7.43320254, 0.5), (-6.95, 0.5))
        make_face()
    extrude(amount=F6_T1_DEPTH)


solid = f1.part
